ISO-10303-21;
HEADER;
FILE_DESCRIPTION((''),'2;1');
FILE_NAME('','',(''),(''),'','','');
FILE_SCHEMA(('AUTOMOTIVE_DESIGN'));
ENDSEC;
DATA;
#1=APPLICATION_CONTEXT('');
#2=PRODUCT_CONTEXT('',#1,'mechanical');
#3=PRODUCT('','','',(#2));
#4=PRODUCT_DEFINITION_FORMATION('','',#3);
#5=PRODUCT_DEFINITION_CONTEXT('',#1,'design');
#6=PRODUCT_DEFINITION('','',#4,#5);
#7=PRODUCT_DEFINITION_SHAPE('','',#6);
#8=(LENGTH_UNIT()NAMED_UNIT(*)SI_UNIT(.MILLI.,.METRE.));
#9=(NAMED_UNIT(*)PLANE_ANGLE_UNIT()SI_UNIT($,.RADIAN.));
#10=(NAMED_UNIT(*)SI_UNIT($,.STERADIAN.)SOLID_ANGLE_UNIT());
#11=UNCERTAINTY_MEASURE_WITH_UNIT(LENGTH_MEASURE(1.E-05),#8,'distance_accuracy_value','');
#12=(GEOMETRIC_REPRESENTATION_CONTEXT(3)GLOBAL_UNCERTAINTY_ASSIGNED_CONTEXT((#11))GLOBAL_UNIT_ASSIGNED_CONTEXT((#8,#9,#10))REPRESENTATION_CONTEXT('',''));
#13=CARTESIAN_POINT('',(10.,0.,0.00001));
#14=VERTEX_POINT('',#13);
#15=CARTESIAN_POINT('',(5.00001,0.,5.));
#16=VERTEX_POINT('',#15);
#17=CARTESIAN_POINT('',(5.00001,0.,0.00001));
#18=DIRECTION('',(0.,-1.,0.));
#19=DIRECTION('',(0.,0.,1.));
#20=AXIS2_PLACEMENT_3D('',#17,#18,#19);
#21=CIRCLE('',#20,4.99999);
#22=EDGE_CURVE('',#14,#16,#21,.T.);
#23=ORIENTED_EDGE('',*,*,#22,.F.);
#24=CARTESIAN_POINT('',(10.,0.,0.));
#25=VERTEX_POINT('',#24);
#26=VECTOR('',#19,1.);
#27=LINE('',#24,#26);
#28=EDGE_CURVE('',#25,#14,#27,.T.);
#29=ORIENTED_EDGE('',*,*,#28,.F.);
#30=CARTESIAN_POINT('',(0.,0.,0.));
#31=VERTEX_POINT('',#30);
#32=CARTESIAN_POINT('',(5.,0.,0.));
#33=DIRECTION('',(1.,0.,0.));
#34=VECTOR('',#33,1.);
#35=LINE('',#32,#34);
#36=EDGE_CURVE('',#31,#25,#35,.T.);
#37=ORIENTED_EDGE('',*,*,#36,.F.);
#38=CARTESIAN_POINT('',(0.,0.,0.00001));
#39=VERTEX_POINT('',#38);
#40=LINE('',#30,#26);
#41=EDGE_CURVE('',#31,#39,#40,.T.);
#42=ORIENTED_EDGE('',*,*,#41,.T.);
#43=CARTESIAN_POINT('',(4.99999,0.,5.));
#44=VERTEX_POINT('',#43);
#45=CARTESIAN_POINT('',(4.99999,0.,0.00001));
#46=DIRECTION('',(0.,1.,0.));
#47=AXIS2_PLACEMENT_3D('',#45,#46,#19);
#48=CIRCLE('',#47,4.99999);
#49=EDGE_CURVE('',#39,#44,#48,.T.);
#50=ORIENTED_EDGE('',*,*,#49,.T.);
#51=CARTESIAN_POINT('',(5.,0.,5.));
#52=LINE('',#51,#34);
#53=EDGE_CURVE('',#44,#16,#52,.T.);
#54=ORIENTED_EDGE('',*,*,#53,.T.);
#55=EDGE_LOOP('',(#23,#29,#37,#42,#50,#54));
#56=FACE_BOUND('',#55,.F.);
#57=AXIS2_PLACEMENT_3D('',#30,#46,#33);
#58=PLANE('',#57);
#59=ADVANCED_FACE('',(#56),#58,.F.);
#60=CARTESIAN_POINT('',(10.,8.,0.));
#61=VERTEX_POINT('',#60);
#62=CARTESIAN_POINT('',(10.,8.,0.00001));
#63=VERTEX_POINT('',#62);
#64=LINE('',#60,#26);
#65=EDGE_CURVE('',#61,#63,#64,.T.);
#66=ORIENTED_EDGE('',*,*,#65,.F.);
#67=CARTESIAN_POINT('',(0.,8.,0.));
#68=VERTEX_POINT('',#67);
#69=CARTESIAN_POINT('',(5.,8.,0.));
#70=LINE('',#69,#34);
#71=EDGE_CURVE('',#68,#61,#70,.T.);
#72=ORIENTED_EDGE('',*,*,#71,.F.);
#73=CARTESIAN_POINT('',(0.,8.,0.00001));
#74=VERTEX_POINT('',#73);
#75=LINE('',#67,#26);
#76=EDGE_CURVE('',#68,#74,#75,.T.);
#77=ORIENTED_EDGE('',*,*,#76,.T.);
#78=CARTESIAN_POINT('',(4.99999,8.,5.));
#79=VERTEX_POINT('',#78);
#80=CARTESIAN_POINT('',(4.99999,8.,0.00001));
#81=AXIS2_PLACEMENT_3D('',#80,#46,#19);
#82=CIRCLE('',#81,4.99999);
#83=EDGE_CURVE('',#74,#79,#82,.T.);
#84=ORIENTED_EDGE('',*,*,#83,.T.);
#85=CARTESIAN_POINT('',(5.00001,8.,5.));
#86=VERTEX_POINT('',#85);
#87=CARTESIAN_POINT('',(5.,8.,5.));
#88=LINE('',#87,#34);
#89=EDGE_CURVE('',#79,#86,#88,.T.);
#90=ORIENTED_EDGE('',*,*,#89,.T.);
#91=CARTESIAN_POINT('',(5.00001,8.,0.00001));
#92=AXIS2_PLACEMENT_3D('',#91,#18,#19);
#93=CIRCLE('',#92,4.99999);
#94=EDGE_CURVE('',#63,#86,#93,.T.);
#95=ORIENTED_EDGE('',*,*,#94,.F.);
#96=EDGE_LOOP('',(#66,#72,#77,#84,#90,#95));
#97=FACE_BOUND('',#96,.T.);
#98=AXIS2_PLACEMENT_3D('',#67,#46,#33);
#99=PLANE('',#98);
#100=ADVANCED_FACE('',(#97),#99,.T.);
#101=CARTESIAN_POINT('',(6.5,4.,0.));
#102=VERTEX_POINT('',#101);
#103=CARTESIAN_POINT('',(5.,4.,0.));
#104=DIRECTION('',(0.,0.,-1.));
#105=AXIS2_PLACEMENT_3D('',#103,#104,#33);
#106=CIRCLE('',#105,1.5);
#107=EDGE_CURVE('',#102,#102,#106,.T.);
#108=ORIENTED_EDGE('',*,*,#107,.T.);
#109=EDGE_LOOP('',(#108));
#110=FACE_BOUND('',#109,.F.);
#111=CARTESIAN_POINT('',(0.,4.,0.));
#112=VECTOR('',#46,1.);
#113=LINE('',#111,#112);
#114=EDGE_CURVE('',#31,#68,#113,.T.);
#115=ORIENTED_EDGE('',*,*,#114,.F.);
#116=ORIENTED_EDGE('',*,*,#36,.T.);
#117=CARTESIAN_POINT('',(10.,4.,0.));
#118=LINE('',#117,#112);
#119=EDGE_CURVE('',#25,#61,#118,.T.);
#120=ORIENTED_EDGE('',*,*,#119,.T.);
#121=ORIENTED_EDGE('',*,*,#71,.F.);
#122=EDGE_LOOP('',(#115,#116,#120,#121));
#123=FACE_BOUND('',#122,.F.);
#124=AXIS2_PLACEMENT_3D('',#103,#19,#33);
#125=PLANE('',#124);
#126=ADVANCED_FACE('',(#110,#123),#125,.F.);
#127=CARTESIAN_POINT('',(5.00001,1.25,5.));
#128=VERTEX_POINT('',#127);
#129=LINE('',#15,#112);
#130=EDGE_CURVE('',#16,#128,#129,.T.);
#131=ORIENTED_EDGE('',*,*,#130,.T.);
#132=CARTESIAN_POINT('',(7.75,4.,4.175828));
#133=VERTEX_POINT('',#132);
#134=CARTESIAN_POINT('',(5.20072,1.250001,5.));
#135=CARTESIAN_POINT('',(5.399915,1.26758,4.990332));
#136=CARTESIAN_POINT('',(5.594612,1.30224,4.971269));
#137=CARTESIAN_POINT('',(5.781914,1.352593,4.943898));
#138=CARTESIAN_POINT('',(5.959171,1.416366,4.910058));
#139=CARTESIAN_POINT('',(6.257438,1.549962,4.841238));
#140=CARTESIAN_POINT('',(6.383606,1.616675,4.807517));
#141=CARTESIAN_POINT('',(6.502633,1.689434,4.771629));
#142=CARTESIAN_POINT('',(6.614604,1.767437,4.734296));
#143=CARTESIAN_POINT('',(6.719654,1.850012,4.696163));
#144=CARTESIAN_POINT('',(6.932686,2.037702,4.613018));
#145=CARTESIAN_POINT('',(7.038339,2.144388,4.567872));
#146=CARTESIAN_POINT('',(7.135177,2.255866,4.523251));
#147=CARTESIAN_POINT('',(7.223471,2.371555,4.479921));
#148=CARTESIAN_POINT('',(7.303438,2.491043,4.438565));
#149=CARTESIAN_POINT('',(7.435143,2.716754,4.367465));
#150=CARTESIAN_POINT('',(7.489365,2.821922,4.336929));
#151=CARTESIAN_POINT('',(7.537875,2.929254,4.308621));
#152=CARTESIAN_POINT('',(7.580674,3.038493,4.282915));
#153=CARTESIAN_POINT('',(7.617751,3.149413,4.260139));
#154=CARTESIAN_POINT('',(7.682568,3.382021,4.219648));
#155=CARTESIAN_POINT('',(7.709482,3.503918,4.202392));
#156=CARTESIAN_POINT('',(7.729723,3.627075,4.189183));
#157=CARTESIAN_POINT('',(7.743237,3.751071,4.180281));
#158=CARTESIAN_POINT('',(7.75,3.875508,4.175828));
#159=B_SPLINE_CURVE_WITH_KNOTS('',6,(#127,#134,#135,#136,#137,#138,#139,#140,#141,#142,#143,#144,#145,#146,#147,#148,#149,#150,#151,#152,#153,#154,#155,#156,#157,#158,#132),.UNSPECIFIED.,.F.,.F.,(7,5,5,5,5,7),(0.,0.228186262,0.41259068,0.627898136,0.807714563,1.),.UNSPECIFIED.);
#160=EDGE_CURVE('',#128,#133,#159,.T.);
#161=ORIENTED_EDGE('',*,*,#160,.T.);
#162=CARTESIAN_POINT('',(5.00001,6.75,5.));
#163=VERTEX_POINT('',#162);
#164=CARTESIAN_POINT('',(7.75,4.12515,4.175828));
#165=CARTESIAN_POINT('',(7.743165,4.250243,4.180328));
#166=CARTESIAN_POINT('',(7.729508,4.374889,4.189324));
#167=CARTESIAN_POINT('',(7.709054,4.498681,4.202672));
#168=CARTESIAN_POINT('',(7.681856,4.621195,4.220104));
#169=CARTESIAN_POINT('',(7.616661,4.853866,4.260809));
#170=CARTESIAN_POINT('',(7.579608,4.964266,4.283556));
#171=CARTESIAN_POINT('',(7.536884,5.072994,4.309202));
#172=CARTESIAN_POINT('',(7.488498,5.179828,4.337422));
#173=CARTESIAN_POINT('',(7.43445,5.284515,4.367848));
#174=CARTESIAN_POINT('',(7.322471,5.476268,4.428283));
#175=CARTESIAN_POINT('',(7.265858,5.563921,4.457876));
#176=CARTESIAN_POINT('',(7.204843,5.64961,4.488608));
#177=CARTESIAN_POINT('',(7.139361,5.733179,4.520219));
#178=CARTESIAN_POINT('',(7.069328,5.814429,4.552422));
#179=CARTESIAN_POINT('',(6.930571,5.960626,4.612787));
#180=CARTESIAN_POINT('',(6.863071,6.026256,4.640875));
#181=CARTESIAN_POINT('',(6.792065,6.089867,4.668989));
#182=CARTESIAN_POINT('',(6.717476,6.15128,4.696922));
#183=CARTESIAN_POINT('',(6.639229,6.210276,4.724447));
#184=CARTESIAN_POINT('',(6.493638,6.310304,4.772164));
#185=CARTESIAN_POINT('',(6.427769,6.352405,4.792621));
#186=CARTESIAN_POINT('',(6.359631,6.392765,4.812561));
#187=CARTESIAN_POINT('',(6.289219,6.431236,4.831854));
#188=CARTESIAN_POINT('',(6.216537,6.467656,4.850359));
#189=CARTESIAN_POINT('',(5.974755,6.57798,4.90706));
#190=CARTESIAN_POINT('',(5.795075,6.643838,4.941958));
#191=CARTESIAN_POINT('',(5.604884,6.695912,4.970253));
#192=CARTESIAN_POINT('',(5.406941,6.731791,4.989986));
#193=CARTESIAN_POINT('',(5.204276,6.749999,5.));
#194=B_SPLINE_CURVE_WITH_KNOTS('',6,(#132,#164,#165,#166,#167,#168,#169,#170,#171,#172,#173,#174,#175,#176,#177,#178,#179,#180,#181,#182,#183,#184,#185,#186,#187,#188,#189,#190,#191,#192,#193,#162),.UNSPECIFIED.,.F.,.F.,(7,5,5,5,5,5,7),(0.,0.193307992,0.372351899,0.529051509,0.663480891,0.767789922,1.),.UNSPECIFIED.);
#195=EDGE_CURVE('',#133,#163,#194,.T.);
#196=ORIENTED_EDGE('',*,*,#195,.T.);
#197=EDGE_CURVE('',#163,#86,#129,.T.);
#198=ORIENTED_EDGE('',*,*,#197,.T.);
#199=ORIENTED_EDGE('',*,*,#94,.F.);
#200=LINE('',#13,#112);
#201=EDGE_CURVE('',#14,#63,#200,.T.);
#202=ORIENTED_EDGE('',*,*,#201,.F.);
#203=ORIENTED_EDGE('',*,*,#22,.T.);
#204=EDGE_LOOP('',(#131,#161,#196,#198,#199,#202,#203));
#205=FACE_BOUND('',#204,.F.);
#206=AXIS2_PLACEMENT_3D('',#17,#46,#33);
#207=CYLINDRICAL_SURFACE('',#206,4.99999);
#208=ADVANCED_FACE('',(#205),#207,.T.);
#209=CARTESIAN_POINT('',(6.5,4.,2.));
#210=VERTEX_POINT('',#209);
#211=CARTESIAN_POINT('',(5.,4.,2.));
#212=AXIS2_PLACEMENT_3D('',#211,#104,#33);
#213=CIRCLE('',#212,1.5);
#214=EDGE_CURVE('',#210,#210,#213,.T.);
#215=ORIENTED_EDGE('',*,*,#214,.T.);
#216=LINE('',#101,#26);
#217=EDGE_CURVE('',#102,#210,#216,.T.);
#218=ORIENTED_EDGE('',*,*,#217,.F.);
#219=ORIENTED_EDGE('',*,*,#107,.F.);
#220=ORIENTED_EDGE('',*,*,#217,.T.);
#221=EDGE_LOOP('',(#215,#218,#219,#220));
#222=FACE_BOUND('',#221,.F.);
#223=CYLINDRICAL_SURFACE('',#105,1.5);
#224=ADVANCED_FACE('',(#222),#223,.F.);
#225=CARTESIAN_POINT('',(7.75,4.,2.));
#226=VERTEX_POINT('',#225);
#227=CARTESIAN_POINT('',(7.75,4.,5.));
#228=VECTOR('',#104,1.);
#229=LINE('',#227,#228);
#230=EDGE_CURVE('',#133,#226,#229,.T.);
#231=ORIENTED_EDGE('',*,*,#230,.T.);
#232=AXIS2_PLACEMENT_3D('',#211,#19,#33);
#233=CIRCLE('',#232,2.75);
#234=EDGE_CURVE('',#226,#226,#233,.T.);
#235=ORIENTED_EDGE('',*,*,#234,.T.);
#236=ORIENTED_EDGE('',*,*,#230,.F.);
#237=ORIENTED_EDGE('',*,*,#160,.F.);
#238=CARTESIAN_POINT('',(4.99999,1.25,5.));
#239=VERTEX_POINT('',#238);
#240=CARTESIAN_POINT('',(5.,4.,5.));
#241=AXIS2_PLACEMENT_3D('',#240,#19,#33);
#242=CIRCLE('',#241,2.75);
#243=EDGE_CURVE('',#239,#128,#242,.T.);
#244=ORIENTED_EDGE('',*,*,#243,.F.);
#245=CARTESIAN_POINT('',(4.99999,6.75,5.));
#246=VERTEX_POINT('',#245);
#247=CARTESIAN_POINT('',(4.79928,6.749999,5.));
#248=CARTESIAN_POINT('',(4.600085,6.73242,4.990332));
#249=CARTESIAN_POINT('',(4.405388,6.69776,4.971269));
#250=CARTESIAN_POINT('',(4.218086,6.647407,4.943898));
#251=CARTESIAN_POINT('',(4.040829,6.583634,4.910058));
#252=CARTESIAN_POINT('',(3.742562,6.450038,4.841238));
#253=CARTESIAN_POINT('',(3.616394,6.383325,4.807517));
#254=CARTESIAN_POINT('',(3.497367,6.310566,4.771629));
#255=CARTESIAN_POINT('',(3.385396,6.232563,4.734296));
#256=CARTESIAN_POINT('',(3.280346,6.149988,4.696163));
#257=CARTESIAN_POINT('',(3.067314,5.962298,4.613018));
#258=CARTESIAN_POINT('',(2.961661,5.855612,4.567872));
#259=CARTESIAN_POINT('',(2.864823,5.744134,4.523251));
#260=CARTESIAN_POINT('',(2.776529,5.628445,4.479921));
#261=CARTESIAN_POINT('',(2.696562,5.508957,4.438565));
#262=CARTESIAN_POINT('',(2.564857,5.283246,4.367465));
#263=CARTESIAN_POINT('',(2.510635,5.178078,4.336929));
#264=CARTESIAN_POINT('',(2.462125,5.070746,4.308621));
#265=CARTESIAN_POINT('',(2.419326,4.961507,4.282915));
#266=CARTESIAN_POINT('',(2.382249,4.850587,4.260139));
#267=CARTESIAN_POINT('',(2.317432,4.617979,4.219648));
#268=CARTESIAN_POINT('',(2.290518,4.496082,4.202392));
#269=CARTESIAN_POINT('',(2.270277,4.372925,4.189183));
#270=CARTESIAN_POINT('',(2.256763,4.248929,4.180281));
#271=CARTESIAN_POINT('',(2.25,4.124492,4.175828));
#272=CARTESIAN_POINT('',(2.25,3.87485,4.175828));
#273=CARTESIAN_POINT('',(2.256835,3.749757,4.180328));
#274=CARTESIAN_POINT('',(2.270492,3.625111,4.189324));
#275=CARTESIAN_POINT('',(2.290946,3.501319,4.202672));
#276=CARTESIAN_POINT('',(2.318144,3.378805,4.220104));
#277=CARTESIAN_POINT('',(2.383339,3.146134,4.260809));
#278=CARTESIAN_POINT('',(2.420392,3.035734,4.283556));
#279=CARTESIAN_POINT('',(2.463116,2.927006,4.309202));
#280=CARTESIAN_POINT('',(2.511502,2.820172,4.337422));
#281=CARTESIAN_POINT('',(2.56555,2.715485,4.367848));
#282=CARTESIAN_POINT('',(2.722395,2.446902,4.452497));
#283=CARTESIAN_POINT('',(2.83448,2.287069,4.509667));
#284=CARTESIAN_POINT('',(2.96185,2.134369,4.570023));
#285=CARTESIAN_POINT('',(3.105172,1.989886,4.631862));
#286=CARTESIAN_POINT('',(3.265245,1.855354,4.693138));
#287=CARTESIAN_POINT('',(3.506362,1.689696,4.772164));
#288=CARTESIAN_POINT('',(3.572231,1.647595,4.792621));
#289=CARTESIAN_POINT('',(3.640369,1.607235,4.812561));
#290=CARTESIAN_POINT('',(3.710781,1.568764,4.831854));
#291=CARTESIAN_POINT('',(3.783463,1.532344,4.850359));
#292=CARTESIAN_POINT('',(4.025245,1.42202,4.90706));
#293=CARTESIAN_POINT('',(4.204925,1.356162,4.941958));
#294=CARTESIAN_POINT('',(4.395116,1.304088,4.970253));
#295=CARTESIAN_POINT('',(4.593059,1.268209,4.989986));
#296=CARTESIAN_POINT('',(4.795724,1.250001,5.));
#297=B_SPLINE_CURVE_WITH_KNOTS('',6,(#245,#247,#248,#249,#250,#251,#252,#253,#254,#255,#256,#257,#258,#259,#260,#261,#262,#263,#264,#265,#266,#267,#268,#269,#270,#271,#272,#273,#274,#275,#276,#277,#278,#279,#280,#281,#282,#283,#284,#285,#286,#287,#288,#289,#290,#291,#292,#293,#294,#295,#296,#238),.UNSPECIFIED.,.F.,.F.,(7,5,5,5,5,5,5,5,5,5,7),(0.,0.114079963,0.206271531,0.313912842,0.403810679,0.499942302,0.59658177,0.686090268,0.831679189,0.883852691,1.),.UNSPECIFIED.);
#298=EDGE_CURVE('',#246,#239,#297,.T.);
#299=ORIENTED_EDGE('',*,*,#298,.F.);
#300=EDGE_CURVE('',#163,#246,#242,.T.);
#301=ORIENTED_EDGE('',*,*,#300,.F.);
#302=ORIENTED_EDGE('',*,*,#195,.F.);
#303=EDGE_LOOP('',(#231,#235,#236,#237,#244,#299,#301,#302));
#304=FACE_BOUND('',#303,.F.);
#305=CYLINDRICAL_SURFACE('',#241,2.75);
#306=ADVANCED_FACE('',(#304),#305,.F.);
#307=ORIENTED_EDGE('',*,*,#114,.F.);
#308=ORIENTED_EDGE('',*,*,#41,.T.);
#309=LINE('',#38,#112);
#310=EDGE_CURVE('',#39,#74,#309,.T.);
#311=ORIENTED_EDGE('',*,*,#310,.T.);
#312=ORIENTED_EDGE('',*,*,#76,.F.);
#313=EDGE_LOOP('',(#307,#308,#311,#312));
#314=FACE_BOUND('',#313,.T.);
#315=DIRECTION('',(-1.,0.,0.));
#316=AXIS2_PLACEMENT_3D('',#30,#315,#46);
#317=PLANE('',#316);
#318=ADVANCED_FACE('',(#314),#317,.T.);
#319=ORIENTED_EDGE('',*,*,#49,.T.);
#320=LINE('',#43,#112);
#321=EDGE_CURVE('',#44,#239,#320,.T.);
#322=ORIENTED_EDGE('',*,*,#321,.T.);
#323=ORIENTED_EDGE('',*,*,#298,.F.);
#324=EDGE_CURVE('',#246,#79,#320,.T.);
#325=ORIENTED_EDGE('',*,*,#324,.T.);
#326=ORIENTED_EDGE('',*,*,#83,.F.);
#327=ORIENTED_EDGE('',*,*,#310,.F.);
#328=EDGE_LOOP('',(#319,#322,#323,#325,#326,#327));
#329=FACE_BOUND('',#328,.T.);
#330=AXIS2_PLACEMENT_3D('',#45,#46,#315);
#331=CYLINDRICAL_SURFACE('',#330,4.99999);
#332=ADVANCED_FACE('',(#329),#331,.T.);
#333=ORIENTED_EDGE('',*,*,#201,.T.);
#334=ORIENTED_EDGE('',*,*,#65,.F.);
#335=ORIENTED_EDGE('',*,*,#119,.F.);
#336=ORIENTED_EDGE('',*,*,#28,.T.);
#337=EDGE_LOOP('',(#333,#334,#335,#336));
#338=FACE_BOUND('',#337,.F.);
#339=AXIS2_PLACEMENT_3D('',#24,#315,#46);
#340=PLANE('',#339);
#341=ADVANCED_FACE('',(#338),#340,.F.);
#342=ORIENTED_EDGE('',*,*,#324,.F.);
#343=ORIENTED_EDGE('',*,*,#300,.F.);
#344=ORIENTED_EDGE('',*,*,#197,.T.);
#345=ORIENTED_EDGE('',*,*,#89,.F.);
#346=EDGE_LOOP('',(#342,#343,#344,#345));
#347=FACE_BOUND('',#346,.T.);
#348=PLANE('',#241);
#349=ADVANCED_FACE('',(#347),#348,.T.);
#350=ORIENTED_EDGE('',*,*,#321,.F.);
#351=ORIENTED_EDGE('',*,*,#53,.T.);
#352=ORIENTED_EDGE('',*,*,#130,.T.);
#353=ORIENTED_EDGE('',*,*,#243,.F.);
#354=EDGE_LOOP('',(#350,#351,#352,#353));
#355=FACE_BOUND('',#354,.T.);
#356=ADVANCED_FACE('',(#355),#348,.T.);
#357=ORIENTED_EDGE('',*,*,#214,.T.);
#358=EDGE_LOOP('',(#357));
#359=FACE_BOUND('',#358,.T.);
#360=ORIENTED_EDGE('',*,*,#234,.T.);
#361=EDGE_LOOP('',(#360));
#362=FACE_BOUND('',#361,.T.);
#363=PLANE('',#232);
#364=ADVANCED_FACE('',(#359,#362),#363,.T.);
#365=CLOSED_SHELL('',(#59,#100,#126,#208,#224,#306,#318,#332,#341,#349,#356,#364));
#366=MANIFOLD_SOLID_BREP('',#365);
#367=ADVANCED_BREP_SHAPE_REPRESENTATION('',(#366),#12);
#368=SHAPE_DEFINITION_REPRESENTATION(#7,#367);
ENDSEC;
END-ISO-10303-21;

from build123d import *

# Parameters (mm, degrees)
F0_W     = 10
F0_H     = 8
F1_DEPTH = 5
F2_R     = 4.99999
F3_R     = 1.5
F5_DEPTH = 5
F6_R     = 2.75
F7_DEPTH = 3


# Not quite as in the source:
# - a fillet or chamfer is up to 0.001 mm smaller than in the source, because OpenCascade refuses the exact size


with BuildPart() as f1:
    # F0 (on Top) → F1 (new body)
    with BuildSketch(Plane.XY):
        with Locations((5, 4)):
            Rectangle(F0_W, F0_H)
    extrude(amount=F1_DEPTH)

    # F2 (radius 5 in the source; OpenCascade refuses exactly that, so slightly less here)
    f2_edges = [f1.edges().sort_by_distance(p)[0] for p in [
        (0, 4, 5),
        (10, 4, 5),
    ]]
    fillet(f2_edges, radius=F2_R)

    # F3 (on face) → F5 (cut)
    with BuildSketch(Plane(origin=(0, 0, 0), x_dir=(1, 0, 0), z_dir=(0, 0, -1))):
        with Locations((5, -4)):
            Circle(F3_R)
    extrude(amount=-F5_DEPTH, mode=Mode.SUBTRACT)

    # F6 (on offset) → F7 (cut)
    with BuildSketch(Plane.XY.offset(5)):
        with Locations((5, 4)):
            Circle(F6_R)
    extrude(amount=-F7_DEPTH, mode=Mode.SUBTRACT)


solid = f1.part
